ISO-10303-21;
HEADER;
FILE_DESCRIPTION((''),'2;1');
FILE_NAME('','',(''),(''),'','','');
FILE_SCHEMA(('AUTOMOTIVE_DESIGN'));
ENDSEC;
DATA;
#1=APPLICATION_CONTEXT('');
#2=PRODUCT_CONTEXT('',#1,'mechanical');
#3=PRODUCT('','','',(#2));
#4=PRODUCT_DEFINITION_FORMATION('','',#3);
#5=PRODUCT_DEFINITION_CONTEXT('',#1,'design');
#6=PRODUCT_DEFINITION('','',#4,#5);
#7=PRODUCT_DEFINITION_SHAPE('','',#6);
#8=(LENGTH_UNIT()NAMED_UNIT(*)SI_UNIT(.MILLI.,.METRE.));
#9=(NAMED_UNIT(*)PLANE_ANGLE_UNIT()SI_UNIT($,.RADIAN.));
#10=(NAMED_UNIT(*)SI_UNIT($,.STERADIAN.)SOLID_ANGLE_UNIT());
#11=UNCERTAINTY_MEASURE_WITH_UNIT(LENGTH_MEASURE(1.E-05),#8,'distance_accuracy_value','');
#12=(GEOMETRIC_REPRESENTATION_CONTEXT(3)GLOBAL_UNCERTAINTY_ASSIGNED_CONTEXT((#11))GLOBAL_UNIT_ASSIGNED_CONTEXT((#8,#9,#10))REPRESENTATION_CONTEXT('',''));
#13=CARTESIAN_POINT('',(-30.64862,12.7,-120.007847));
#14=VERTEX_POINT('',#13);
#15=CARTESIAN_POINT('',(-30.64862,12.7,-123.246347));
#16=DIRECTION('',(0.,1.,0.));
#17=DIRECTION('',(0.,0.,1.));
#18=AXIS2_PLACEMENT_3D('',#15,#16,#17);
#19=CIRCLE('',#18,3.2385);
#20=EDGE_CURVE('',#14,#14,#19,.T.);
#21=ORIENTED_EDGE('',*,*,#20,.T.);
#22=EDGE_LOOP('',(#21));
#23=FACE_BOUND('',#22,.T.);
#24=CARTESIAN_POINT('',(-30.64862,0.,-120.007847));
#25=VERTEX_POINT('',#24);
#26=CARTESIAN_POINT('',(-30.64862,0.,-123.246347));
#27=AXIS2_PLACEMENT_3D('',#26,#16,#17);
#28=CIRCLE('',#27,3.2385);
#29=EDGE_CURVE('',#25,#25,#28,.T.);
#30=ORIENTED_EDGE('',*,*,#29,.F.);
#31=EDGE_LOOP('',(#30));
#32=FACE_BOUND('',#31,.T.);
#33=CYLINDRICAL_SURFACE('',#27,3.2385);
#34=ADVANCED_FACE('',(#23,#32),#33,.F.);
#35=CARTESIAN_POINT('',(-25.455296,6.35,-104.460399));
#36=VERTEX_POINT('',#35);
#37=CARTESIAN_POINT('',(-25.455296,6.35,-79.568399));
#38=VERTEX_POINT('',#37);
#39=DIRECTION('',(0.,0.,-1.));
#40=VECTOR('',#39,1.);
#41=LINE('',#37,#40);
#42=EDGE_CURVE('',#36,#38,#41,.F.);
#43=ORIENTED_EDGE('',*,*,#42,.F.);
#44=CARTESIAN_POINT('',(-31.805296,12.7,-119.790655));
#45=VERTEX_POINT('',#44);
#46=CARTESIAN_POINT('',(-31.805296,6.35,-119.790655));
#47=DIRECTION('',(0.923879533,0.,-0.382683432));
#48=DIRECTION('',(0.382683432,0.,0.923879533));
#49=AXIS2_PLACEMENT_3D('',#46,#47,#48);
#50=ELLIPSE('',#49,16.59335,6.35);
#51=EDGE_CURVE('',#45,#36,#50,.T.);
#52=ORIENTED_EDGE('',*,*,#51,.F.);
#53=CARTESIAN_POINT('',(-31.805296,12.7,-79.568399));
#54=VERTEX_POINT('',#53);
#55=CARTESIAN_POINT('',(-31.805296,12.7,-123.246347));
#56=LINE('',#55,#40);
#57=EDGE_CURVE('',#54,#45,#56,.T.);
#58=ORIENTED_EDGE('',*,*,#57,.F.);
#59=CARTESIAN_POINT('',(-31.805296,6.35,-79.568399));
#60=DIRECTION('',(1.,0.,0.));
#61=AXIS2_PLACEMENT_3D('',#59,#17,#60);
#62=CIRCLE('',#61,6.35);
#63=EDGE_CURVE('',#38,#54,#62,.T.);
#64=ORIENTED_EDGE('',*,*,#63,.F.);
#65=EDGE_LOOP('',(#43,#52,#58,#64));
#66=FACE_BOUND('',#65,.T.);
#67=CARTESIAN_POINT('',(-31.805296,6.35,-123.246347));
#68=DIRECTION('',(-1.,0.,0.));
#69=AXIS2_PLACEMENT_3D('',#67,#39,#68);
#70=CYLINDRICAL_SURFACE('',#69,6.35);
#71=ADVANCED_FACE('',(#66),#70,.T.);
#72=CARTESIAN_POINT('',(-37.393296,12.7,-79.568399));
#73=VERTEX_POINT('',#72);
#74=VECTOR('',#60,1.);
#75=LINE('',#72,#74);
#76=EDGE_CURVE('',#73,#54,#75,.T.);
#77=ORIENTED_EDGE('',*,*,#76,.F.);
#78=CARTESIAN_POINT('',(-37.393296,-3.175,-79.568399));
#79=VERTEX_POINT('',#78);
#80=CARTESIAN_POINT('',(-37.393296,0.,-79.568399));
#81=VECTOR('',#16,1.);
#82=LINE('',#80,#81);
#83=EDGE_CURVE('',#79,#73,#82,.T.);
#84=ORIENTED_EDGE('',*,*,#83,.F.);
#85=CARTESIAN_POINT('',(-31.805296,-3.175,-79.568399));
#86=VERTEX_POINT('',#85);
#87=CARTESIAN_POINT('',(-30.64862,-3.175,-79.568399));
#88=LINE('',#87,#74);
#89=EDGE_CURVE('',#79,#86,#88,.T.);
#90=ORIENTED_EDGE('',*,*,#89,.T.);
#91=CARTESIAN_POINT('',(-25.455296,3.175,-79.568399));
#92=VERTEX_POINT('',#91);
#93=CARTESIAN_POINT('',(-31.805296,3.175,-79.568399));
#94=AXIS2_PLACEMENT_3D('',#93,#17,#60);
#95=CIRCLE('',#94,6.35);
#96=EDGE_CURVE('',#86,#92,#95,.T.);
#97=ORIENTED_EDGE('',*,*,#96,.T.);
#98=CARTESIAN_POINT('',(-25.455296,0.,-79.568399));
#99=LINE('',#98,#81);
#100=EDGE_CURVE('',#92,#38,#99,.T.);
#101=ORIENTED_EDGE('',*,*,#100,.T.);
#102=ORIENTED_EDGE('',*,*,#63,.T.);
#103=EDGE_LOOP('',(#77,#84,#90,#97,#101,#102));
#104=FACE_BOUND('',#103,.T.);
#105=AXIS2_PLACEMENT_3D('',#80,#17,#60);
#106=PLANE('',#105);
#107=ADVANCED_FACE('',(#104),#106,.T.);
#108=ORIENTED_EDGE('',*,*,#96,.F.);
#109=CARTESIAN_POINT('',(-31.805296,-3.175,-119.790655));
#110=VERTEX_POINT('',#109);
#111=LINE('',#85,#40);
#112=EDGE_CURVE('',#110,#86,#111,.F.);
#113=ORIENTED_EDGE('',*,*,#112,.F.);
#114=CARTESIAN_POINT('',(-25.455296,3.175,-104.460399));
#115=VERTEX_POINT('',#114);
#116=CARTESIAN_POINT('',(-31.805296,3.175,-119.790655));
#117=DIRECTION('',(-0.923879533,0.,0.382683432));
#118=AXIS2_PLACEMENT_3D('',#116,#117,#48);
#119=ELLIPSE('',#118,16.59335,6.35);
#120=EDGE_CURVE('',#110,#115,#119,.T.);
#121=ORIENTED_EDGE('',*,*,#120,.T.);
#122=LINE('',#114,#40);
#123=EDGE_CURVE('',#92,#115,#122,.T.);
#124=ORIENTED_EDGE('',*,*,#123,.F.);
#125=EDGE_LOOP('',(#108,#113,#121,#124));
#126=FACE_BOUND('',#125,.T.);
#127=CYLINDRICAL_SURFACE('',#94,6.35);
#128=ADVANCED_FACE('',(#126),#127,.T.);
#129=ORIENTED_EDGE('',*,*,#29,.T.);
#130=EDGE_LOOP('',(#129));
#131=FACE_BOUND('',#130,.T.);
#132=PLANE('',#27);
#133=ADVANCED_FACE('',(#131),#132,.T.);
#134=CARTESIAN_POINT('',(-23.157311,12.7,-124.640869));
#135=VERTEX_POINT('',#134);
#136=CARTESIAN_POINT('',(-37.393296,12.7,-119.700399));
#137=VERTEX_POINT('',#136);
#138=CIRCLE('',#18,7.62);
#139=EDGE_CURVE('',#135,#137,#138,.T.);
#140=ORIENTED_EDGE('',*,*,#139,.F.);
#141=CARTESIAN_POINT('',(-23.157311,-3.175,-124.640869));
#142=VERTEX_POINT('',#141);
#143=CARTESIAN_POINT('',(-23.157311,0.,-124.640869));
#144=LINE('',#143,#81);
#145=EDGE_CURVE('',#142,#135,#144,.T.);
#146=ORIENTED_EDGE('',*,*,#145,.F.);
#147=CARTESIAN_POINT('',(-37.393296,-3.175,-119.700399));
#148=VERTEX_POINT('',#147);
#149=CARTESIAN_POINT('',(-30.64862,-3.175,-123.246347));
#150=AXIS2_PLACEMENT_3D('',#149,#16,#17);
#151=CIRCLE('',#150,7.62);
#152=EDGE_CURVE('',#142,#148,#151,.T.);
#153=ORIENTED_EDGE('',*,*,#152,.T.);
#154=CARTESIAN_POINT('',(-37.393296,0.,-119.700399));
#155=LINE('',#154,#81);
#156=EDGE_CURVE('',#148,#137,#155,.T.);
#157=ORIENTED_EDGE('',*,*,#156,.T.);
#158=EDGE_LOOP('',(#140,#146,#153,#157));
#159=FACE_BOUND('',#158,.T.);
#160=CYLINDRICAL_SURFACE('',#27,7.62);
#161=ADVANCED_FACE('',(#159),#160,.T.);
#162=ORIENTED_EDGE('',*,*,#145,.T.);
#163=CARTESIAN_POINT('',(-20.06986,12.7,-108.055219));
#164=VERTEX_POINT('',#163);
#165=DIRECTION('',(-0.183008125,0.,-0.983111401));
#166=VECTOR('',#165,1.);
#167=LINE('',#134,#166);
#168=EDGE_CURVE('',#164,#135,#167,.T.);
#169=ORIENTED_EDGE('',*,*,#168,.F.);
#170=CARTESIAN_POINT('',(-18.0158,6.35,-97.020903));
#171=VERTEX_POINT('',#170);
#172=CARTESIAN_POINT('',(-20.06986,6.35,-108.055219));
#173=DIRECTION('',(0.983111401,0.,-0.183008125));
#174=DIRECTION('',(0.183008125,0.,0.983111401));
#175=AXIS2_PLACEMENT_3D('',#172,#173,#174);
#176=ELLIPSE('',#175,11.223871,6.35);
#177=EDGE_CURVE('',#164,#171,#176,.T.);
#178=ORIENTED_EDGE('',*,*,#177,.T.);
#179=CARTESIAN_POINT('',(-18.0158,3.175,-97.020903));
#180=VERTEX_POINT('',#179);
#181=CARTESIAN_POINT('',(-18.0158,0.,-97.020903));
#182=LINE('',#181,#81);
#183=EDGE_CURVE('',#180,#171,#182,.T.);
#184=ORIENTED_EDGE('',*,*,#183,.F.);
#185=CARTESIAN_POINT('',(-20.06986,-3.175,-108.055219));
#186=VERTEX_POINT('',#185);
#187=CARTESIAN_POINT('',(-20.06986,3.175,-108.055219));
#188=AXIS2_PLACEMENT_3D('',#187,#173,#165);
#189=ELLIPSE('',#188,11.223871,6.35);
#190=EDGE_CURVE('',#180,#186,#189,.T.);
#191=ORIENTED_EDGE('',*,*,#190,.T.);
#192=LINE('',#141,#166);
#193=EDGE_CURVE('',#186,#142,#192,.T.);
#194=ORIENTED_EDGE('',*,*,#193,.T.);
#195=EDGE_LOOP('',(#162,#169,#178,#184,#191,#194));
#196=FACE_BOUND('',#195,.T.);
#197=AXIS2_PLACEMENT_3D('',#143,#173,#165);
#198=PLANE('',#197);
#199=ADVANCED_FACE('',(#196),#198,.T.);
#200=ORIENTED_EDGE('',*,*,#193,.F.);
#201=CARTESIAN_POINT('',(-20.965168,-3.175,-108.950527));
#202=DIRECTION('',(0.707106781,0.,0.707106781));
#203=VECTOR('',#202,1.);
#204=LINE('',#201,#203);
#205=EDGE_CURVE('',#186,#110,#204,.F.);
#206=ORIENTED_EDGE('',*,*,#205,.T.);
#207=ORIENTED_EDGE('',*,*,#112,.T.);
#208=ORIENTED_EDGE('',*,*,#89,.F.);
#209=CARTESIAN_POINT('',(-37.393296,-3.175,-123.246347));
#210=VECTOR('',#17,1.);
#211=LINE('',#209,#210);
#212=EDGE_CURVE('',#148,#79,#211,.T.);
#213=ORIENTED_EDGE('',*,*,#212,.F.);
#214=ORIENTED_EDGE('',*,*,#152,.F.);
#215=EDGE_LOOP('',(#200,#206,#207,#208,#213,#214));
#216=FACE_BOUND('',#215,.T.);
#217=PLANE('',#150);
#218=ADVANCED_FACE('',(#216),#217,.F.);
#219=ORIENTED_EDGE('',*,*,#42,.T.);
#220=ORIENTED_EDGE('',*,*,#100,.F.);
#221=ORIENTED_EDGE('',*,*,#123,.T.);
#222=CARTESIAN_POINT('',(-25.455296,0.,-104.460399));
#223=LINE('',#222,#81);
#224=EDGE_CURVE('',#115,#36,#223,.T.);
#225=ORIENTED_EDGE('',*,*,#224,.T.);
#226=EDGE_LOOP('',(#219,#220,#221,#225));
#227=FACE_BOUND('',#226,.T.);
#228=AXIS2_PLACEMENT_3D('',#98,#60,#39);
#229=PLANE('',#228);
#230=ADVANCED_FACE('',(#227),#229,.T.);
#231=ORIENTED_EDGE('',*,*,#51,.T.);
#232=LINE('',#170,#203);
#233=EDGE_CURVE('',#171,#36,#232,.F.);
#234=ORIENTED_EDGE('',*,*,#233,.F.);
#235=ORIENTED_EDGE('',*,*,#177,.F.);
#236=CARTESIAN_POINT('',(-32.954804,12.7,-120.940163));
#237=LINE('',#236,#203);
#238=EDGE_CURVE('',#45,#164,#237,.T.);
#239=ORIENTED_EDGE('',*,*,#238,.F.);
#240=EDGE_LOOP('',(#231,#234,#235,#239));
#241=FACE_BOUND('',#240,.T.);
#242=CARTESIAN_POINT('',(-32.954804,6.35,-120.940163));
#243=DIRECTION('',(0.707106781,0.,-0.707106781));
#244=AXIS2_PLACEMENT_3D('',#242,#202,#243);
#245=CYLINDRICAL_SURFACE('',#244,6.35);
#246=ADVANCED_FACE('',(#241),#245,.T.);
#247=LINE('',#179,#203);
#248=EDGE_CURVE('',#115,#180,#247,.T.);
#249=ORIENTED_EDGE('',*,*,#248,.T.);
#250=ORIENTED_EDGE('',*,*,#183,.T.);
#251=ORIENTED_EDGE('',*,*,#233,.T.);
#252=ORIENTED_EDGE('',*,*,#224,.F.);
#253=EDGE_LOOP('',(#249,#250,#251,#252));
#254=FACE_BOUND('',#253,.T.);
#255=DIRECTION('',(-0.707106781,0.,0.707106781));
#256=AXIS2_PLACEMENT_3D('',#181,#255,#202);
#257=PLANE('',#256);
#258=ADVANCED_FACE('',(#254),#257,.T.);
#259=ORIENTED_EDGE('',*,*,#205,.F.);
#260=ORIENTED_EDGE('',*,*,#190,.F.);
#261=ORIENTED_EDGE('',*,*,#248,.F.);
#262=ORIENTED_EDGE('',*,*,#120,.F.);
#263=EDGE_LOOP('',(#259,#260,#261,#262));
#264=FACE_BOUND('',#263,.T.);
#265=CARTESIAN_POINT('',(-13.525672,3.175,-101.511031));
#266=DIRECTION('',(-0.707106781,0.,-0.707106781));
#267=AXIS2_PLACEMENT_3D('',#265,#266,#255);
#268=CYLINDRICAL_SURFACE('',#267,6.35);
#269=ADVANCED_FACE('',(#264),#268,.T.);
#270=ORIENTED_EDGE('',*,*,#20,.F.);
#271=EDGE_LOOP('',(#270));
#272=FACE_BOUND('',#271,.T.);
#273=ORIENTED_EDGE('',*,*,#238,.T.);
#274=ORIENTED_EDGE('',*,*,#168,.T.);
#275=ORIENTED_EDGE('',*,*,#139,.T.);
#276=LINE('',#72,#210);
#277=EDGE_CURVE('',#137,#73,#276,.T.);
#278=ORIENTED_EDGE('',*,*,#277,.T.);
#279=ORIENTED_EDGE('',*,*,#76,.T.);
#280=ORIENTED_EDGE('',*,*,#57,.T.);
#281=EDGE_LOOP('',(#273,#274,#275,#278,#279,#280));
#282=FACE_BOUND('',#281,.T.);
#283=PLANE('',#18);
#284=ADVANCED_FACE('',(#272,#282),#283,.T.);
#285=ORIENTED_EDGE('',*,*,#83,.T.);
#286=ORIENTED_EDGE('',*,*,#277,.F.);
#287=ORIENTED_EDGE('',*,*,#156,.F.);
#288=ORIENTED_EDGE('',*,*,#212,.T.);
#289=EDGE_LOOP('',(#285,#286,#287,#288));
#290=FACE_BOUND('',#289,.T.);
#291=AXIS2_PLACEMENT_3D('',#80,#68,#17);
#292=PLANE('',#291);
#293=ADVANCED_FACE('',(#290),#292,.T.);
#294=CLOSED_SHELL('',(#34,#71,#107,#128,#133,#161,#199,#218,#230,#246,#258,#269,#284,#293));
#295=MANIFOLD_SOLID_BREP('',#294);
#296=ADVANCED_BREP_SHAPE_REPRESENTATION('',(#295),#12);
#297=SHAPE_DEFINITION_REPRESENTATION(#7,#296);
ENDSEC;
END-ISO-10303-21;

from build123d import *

# Parameters (mm, degrees)
STOCK_RATCHET_GEAR_LARGE_1_OUTLINE_R = 3.2385
STOCK_RATCHET_GEAR_LARGE_1_DEPTH     = 12.7
BOSS_EXTRUDE2_START                  = -15.875
BOSS_EXTRUDE2_DEPTH                  = 3.175
FILLET1_R                            = 6.35


# Read off the part's stored shape, not the designer's step: Stock-Ratchet Gear, Large-1
with BuildPart() as part:
    # Stock-Ratchet Gear, Large-1 outline → Stock-Ratchet Gear, Large-1 (new body)
    with BuildSketch(Plane(origin=(0, 0, 0), x_dir=(1, 0, 0), z_dir=(0, 1, 0))):
        with BuildLine():
            ThreePointArc((-23.157311364, 124.640869029), (-33.146905094, 130.445164573), (-37.393295868, 119.700398636))
            Line((-37.393295868, 119.700398636), (-37.393295868, 79.568398636))
            Line((-37.393295868, 79.568398636), (-25.455295868, 79.568398636))
            Line((-25.455295868, 79.568398636), (-25.455295868, 104.460398636))
            Line((-25.455295868, 104.460398636), (-18.015800251, 97.020903018))
            Line((-18.015800251, 97.020903018), (-23.157311364, 124.640869029))
        make_face()
        with Locations((-30.648620237, 123.246347117)):
            Circle(STOCK_RATCHET_GEAR_LARGE_1_OUTLINE_R, mode=Mode.SUBTRACT)
    extrude(amount=STOCK_RATCHET_GEAR_LARGE_1_DEPTH)

    # Sketch1 → Boss-Extrude2 (add)
    with BuildSketch(Plane(origin=(0, 12.7, 0), x_dir=(1, 0, 0), z_dir=(0, 1, 0)).offset(BOSS_EXTRUDE2_START)):
        with BuildLine():
            Line((-37.393295868, 119.700398636), (-37.393295868, 79.568398636))
            Line((-37.393295868, 79.568398636), (-25.455295868, 79.568398636))
            Line((-25.455295868, 79.568398636), (-25.455295868, 104.460398636))
            Line((-25.455295868, 104.460398636), (-18.015800251, 97.020903018))
            Line((-18.015800251, 97.020903018), (-23.157311364, 124.640869029))
            ThreePointArc((-23.157311364, 124.640869029), (-33.146905094, 130.445164573), (-37.393295868, 119.700398636))
        make_face()
    extrude(amount=BOSS_EXTRUDE2_DEPTH)

    # Fillet1
    # the kernel refuses this fillet: 6.35 mm, written as the material it takes off along each edge
    with BuildSketch(Plane(origin=(-36.68061602, -3.175, -115.685718787), x_dir=(0.7071067811865475, 0, -0.7071067811865475), z_dir=(0.7071067811865476, 0, 0.7071067811865476))) as fillet1_piece_1_section:
        with BuildLine():
            CenterArc((FILLET1_R, FILLET1_R), FILLET1_R, 180, 90)
            Line((0, FILLET1_R), (0, 0))
            Line((0, 0), (FILLET1_R, 0))
        make_face()
    fillet1_piece_1 = extrude(amount=42.2710356, mode=Mode.PRIVATE)
    fillet1_piece_1 = split(fillet1_piece_1, bisect_by=Plane(origin=(-25.455295868, -1.777167461, -96.72422015), z_dir=(1, 0, 0)), keep=Keep.TOP, mode=Mode.PRIVATE)
    add(fillet1_piece_1, mode=Mode.SUBTRACT)
    with BuildSketch(Plane(origin=(-25.455295868, -3.175, -63.693398636), x_dir=(-1, 0, 0), z_dir=(0, 0, -1))) as fillet1_piece_2_section:
        with BuildLine():
            CenterArc((FILLET1_R, FILLET1_R), FILLET1_R, 180, 90)
            Line((0, FILLET1_R), (0, 0))
            Line((0, 0), (FILLET1_R, 0))
        make_face()
    fillet1_piece_2 = extrude(amount=56.642, mode=Mode.PRIVATE)
    fillet1_piece_2 = split(fillet1_piece_2, bisect_by=Plane(origin=(-16.375055612, -1.763623306, -95.380158379), z_dir=(-0.7071067812340712, 0, 0.7071067811390238)), keep=Keep.TOP, mode=Mode.PRIVATE)
    add(fillet1_piece_2, mode=Mode.SUBTRACT)
    with BuildSketch(Plane(origin=(-36.680616019, 12.7, -115.685718788), x_dir=(0.7071067812340712, 0, -0.7071067811390238), z_dir=(0.7071067811390238, 0, 0.7071067812340712))) as fillet1_piece_3_section:
        with BuildLine():
            CenterArc((FILLET1_R, -FILLET1_R), FILLET1_R, 90, 90)
            Line((0, -FILLET1_R), (0, 0))
            Line((0, 0), (FILLET1_R, 0))
        make_face()
    fillet1_piece_3 = extrude(amount=42.271035599, mode=Mode.PRIVATE)
    fillet1_piece_3 = split(fillet1_piece_3, bisect_by=Plane(origin=(-25.455295868, 11.302167461, -96.72422015), z_dir=(1, 0, 0)), keep=Keep.TOP, mode=Mode.PRIVATE)
    add(fillet1_piece_3, mode=Mode.SUBTRACT)
    with BuildSketch(Plane(origin=(-25.455295868, 12.7, -63.693398636), x_dir=(-1, 0, 0), z_dir=(0, 0, -1))) as fillet1_piece_4_section:
        with BuildLine():
            CenterArc((FILLET1_R, -FILLET1_R), FILLET1_R, 90, 90)
            Line((0, -FILLET1_R), (0, 0))
            Line((0, 0), (FILLET1_R, 0))
        make_face()
    fillet1_piece_4 = extrude(amount=56.642, mode=Mode.PRIVATE)
    fillet1_piece_4 = split(fillet1_piece_4, bisect_by=Plane(origin=(-16.375055612, 11.288623306, -95.380158379), z_dir=(-0.7071067812340712, 0, 0.7071067811390238)), keep=Keep.TOP, mode=Mode.PRIVATE)
    add(fillet1_piece_4, mode=Mode.SUBTRACT)
    with BuildSketch(Plane(origin=(-25.455295868, -3.175, -63.693398636), x_dir=(-1, 0, 0), z_dir=(0, 0, -1))) as fillet1_piece_5a_section:
        with BuildLine():
            CenterArc((FILLET1_R, FILLET1_R), FILLET1_R, 180, 90)
            Line((0, FILLET1_R), (0, 0))
            Line((0, 0), (FILLET1_R, 0))
        make_face()
    fillet1_piece_5a = extrude(amount=56.642, mode=Mode.PRIVATE)
    fillet1_piece_5a = split(fillet1_piece_5a, bisect_by=Plane(origin=(-30.404898402, -1.660706588, -109.41000117), z_dir=(0.7071067812340712, 0, -0.7071067811390238)), keep=Keep.TOP, mode=Mode.PRIVATE)
    with BuildSketch(Plane(origin=(-36.68061602, -3.175, -115.685718787), x_dir=(0.7071067811865475, 0, -0.7071067811865475), z_dir=(0.7071067811865476, 0, 0.7071067811865476))) as fillet1_piece_5b_section:
        with BuildLine():
            CenterArc((FILLET1_R, FILLET1_R), FILLET1_R, 180, 90)
            Line((0, FILLET1_R), (0, 0))
            Line((0, 0), (FILLET1_R, 0))
        make_face()
    fillet1_piece_5b = extrude(amount=42.2710356, mode=Mode.PRIVATE)
    fillet1_piece_5b = split(fillet1_piece_5b, bisect_by=Plane(origin=(-25.455295868, -1.660706588, -111.460193667), z_dir=(-1, 0, 0)), keep=Keep.TOP, mode=Mode.PRIVATE)
    fillet1_piece_5 = fillet1_piece_5a & fillet1_piece_5b
    add(fillet1_piece_5, mode=Mode.SUBTRACT)
    with BuildSketch(Plane(origin=(-25.455295868, 12.7, -63.693398636), x_dir=(-1, 0, 0), z_dir=(0, 0, -1))) as fillet1_piece_6a_section:
        with BuildLine():
            CenterArc((FILLET1_R, -FILLET1_R), FILLET1_R, 90, 90)
            Line((0, -FILLET1_R), (0, 0))
            Line((0, 0), (FILLET1_R, 0))
        make_face()
    fillet1_piece_6a = extrude(amount=56.642, mode=Mode.PRIVATE)
    fillet1_piece_6a = split(fillet1_piece_6a, bisect_by=Plane(origin=(-30.404898402, 11.185706588, -109.41000117), z_dir=(0.7071067812340712, 0, -0.7071067811390238)), keep=Keep.TOP, mode=Mode.PRIVATE)
    with BuildSketch(Plane(origin=(-36.680616019, 12.7, -115.685718788), x_dir=(0.7071067812340712, 0, -0.7071067811390238), z_dir=(0.7071067811390238, 0, 0.7071067812340712))) as fillet1_piece_6b_section:
        with BuildLine():
            CenterArc((FILLET1_R, -FILLET1_R), FILLET1_R, 90, 90)
            Line((0, -FILLET1_R), (0, 0))
            Line((0, 0), (FILLET1_R, 0))
        make_face()
    fillet1_piece_6b = extrude(amount=42.271035599, mode=Mode.PRIVATE)
    fillet1_piece_6b = split(fillet1_piece_6b, bisect_by=Plane(origin=(-25.455295868, 11.185706588, -111.460193668), z_dir=(-1, 0, 0)), keep=Keep.TOP, mode=Mode.PRIVATE)
    fillet1_piece_6 = fillet1_piece_6a & fillet1_piece_6b
    add(fillet1_piece_6, mode=Mode.SUBTRACT)


solid = part.part
